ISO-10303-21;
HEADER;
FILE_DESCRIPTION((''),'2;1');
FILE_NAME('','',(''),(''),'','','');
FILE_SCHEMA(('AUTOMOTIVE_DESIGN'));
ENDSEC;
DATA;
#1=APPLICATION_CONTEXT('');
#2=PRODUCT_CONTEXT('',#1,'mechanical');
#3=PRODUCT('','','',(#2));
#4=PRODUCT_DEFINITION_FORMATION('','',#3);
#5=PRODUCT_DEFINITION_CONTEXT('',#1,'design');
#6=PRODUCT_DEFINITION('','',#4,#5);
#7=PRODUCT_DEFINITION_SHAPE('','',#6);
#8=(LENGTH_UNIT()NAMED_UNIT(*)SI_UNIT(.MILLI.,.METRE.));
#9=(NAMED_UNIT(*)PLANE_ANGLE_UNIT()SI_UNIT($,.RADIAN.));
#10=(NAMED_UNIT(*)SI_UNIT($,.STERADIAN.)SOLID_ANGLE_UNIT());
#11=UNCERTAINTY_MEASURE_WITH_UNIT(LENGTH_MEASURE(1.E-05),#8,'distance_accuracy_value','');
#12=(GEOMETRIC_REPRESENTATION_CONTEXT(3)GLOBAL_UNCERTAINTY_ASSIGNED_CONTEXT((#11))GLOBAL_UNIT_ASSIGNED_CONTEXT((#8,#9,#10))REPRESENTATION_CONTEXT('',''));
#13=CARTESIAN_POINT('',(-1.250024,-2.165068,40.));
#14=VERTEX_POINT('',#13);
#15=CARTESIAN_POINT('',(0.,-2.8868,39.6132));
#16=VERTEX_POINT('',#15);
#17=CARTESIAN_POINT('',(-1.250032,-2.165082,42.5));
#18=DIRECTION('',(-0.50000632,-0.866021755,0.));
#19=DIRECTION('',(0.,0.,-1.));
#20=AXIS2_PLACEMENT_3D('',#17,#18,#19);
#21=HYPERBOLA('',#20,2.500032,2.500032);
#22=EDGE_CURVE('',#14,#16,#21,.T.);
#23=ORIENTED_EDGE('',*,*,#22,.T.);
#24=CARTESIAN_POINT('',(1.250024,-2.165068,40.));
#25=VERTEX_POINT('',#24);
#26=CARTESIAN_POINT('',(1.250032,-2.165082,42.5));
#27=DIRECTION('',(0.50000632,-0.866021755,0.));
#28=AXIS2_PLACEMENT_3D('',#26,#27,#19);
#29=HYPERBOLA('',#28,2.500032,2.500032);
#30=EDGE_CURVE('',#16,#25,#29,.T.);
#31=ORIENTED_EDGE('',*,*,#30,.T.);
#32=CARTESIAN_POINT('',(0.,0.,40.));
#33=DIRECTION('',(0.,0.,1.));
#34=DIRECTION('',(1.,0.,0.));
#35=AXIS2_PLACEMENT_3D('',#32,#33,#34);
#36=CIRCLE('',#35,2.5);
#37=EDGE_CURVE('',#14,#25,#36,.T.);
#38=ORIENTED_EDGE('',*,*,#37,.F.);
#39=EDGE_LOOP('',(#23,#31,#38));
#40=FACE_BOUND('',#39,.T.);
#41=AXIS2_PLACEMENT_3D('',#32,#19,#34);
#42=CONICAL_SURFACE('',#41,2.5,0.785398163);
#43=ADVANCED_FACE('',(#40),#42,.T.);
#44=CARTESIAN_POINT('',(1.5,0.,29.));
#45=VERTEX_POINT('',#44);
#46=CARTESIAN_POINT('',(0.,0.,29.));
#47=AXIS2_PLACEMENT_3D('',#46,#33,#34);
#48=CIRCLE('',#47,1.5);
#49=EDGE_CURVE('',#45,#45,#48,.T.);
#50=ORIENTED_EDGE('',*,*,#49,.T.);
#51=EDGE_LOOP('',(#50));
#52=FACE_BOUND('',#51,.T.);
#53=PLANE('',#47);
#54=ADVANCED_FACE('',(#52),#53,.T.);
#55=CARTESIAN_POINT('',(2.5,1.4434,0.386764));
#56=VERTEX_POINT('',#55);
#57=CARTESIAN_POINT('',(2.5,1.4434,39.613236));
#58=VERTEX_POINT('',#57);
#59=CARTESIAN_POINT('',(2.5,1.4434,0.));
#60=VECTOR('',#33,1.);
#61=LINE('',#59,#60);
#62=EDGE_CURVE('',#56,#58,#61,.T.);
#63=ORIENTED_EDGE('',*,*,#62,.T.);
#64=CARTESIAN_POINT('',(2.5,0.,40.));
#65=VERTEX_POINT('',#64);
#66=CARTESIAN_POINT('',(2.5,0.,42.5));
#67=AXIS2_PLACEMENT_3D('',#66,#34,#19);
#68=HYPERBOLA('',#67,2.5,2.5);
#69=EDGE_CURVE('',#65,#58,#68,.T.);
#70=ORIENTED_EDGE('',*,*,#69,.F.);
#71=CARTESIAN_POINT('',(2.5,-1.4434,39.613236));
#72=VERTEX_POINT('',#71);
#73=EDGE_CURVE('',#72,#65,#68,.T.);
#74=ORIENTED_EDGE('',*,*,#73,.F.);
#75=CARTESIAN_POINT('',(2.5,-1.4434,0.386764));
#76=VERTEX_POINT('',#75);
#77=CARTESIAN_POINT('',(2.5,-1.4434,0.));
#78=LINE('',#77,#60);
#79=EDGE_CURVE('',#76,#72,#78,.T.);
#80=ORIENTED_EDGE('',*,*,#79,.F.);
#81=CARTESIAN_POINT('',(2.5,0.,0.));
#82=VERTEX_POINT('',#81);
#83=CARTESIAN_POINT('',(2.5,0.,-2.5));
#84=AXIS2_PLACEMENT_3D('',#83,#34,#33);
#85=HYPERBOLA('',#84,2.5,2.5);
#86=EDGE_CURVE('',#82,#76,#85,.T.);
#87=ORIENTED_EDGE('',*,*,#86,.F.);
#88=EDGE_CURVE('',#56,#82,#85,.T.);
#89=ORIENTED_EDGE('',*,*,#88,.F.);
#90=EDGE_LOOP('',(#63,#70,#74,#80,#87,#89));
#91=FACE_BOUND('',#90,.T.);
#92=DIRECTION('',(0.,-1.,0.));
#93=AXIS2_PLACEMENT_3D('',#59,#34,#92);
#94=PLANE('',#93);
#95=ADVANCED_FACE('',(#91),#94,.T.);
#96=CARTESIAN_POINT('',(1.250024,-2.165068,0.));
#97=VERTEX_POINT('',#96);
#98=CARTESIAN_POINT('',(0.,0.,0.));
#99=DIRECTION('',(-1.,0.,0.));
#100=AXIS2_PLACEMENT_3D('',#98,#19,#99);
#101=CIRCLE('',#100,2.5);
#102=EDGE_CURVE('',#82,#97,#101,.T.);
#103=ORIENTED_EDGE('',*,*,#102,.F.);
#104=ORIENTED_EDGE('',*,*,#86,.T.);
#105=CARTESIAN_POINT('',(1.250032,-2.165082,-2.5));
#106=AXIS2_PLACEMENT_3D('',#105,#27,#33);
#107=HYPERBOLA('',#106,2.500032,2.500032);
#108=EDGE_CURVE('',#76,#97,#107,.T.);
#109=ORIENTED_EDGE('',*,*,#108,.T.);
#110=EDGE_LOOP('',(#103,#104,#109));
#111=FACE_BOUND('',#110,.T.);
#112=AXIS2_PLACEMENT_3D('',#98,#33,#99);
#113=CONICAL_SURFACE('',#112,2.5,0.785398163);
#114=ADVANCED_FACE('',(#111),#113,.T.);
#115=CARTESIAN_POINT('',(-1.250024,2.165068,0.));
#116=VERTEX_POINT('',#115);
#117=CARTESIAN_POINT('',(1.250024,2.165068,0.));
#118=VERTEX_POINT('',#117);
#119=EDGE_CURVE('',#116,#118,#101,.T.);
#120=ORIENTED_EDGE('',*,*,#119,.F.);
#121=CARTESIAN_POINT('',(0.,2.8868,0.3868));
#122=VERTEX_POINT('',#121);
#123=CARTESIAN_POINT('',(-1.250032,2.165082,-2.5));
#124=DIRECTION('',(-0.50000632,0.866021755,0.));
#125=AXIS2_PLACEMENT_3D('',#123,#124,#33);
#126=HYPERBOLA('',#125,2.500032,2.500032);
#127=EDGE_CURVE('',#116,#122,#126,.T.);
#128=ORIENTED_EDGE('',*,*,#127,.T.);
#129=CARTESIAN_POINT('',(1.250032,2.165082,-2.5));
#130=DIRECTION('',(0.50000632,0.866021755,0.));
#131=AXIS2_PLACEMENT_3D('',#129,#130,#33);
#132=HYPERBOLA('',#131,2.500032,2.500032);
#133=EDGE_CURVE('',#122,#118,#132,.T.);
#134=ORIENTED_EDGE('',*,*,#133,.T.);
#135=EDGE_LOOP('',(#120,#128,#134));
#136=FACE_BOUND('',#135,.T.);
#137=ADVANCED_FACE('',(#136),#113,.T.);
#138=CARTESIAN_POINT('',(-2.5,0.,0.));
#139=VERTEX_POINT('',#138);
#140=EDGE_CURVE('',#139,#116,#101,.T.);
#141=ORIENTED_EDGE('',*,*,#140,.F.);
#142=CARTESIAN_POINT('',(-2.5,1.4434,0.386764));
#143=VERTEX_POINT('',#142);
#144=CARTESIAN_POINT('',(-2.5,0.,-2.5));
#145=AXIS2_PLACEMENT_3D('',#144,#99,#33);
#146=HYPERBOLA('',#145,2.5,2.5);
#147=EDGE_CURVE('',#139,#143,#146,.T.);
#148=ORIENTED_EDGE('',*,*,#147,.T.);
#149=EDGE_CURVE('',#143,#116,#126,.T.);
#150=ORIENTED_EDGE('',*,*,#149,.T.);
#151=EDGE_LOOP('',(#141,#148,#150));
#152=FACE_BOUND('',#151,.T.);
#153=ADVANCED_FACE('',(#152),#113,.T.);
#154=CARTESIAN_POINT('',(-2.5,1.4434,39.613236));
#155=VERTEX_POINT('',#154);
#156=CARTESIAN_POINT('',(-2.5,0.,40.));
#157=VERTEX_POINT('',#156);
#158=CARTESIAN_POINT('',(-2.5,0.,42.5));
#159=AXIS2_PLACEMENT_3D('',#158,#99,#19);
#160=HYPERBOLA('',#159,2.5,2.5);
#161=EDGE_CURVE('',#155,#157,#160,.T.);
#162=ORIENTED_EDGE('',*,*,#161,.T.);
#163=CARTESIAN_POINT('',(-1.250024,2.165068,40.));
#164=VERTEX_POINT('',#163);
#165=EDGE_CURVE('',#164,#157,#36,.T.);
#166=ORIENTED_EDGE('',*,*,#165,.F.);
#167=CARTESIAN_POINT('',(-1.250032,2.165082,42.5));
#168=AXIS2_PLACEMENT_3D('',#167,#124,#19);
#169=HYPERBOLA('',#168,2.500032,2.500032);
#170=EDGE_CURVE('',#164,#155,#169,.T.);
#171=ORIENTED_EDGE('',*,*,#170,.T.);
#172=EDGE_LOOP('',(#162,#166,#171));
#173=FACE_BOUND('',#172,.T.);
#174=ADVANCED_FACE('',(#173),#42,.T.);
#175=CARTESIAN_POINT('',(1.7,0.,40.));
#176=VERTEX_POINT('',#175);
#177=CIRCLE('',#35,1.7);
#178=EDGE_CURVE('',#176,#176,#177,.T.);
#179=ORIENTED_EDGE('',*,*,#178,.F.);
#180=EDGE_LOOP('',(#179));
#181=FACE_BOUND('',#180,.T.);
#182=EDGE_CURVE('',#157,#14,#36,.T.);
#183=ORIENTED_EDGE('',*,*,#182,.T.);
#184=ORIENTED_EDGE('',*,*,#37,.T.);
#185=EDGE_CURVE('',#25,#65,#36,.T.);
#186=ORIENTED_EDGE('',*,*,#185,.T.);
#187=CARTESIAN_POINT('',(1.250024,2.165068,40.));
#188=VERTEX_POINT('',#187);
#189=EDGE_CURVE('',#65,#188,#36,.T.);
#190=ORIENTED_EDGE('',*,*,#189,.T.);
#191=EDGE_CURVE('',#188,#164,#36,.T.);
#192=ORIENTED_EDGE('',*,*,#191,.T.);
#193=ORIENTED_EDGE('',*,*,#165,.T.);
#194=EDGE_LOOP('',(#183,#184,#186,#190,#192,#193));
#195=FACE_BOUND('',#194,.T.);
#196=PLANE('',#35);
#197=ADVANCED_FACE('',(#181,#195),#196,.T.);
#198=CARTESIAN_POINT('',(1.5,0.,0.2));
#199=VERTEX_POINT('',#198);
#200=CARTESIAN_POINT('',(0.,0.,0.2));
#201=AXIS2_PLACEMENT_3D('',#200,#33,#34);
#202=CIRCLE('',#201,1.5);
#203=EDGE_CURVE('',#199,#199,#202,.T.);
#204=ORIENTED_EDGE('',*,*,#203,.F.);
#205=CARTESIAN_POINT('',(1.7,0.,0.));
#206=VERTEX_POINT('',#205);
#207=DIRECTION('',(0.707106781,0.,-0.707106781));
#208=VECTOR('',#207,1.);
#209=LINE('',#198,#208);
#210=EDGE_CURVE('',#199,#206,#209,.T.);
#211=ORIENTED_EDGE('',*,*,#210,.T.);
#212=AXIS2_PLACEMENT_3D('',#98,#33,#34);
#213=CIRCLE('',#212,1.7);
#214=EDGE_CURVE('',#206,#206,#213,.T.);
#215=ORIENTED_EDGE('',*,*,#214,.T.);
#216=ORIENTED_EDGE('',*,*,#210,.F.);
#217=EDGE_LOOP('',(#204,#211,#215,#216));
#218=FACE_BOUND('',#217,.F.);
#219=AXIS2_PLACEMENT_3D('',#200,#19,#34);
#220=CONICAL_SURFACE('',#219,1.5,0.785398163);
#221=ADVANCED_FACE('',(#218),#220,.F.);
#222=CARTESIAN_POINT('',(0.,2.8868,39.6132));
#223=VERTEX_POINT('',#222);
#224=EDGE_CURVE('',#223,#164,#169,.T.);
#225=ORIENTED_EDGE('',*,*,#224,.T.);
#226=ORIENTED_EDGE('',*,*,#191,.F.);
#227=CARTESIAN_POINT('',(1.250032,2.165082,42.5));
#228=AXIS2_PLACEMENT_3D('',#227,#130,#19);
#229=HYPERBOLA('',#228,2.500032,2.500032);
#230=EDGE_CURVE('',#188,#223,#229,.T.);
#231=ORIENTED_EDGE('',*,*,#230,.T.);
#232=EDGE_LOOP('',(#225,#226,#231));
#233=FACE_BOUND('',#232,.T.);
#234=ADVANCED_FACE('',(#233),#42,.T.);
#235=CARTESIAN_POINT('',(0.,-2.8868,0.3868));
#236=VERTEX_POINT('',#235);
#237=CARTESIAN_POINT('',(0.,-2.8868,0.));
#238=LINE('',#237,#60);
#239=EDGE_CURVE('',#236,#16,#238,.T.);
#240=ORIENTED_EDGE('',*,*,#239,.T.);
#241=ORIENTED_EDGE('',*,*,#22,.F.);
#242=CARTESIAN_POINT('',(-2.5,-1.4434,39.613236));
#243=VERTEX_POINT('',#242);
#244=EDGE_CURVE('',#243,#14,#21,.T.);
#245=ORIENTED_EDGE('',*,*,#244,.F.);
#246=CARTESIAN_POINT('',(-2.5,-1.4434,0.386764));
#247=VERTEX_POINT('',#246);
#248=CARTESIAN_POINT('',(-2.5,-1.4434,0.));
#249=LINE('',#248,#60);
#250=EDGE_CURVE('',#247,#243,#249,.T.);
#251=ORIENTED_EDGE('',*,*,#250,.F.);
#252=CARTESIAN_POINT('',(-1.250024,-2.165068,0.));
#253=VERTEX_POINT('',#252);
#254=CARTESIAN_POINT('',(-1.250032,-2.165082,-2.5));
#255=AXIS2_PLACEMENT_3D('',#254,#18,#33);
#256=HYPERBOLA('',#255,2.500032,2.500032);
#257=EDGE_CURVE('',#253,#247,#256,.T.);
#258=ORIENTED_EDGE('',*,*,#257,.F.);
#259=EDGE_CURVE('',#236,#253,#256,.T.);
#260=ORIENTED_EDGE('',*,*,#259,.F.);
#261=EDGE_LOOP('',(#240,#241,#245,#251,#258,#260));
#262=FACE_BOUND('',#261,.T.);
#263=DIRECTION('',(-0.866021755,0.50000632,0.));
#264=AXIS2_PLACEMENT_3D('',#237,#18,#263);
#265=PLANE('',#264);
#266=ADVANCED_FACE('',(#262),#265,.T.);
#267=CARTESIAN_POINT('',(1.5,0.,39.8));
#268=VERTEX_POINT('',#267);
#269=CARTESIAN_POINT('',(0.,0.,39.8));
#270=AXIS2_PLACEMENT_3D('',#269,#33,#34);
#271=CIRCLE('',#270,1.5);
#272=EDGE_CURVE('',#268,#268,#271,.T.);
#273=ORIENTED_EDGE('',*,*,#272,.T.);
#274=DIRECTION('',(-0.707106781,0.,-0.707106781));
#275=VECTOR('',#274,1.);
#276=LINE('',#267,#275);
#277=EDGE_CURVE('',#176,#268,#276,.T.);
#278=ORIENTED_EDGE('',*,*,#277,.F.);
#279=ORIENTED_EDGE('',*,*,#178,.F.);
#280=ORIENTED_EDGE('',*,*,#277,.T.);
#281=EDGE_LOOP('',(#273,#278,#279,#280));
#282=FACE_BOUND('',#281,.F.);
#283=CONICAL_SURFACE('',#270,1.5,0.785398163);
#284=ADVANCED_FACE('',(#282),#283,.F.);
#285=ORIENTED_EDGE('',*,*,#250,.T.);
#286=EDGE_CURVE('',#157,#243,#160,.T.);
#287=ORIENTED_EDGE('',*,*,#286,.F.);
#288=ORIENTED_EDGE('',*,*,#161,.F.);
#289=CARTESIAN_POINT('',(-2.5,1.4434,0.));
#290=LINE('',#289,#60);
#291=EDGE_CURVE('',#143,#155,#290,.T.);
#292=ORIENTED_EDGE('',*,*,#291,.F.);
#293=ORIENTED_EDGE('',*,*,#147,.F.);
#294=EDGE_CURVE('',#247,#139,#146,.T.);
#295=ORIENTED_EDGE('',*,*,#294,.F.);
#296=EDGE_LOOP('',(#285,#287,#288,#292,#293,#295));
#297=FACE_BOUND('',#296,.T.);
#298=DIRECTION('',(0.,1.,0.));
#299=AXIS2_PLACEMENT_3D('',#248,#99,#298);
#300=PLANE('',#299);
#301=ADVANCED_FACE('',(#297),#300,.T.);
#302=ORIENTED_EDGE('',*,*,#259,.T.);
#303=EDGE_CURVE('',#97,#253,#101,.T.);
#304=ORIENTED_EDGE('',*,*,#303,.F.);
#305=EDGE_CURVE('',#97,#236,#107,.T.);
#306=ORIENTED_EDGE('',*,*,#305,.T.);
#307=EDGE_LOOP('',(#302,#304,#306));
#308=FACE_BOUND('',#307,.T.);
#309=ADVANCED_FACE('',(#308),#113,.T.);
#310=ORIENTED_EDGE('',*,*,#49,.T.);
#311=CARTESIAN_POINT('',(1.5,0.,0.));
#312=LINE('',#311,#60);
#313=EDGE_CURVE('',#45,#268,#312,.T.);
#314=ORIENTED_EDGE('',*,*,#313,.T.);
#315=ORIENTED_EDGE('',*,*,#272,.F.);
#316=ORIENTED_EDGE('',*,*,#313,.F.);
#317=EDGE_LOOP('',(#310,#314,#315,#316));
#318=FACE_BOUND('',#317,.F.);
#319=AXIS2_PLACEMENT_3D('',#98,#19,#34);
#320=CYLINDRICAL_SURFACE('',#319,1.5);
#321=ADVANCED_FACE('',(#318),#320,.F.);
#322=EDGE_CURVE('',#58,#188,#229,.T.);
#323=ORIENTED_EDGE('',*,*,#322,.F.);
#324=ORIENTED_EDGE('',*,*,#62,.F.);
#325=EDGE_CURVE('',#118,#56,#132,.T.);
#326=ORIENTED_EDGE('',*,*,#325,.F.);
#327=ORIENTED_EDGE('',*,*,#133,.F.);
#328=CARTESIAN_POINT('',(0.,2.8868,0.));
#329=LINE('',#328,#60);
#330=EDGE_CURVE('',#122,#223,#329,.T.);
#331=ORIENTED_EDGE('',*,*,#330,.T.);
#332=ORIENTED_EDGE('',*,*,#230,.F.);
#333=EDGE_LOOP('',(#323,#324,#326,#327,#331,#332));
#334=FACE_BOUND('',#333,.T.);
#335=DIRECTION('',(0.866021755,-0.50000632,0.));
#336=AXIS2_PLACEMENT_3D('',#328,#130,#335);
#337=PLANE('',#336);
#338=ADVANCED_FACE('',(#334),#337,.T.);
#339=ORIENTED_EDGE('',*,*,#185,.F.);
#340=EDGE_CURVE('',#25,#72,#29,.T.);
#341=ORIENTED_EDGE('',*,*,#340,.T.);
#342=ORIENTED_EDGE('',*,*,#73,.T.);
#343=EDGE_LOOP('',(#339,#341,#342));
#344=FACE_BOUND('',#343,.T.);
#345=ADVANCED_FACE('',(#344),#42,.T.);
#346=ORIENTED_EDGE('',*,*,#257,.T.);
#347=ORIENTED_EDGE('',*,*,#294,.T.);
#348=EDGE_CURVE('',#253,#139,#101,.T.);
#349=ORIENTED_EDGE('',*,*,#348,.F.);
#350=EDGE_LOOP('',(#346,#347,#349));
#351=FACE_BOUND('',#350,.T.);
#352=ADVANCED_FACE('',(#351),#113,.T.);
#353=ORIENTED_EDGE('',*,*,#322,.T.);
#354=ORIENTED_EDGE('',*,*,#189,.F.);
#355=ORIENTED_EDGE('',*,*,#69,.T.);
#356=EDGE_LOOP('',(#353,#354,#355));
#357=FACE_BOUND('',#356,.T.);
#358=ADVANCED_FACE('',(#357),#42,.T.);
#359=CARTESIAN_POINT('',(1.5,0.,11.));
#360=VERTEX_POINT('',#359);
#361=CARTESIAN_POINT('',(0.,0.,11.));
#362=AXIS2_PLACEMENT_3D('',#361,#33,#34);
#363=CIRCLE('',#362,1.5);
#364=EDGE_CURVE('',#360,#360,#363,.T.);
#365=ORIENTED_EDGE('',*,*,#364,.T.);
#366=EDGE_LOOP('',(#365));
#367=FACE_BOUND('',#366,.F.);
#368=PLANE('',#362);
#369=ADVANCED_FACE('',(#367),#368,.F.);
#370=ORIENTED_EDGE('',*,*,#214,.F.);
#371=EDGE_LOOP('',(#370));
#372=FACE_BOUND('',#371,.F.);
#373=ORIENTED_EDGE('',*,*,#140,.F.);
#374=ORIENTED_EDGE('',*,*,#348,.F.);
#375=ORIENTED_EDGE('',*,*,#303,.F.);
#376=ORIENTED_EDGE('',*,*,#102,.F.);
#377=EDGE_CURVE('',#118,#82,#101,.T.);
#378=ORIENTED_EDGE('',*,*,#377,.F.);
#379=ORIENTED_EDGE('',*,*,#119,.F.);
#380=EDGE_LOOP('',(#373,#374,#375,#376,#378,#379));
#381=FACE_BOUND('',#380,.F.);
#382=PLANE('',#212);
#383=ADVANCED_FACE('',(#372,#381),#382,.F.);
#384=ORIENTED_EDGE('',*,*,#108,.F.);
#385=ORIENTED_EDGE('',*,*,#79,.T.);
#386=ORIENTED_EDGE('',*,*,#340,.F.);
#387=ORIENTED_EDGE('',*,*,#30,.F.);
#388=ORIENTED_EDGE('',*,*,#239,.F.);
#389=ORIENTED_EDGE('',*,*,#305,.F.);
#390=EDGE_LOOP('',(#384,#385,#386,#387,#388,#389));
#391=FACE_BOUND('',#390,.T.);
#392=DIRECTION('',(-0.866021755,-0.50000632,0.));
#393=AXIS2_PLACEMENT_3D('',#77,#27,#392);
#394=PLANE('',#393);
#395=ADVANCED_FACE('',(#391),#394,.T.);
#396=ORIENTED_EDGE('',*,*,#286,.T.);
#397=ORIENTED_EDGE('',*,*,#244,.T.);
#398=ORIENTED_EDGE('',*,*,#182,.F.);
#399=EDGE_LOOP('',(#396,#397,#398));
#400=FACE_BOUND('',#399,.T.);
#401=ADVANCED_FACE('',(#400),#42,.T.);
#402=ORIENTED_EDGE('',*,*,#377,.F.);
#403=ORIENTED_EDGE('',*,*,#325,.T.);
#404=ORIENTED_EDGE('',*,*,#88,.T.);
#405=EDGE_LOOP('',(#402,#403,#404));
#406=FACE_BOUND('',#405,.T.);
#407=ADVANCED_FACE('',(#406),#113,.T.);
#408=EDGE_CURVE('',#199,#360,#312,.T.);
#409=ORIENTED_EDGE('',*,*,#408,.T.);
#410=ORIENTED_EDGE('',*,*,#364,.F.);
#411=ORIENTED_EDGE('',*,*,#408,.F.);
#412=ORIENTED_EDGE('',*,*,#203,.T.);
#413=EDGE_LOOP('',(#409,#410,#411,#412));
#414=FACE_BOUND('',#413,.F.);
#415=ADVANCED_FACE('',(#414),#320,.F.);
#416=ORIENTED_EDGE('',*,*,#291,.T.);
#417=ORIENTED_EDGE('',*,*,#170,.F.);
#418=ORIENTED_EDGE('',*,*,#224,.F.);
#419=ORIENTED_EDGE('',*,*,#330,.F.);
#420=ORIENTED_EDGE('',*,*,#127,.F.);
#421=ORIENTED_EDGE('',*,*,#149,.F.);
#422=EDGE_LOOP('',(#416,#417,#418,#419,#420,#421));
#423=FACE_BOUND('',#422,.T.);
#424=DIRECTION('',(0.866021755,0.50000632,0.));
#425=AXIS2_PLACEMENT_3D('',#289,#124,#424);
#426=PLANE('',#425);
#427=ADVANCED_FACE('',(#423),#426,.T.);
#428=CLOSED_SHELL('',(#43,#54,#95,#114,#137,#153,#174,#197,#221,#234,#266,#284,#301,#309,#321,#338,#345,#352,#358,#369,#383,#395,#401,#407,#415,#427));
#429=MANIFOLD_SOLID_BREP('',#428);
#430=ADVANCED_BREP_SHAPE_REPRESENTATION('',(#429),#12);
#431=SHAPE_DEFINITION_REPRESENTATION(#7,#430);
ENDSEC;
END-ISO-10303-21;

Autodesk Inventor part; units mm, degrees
ref_plane "YZ Plane" through (0, 0, 0) normal (1, 0, 0) x (0, 1, 0)
ref_plane "XZ Plane" through (0, 0, 0) normal (0, 1, 0) x (-1, 0, 0)
sketch "Náčrt1" plane through (0, 0, 0) normal (0, 0, 1) x (1, 0, 0)
  line L0 (2.5, -1.4434) -> (0, -2.8868)
  line L1 (0, -2.8868) -> (-2.5, -1.4434)
  line L2 (-2.5, -1.4434) -> (-2.5, 1.4434)
  line L3 (-2.5, 1.4434) -> (0, 2.8868)
  line L4 (0, 2.8868) -> (2.5, 1.4434)
  line L5 (2.5, 1.4434) -> (2.5, -1.4434)
  circle A0 centre (0, 0) radius 1.5
  point P0 (2.5, 0)
  dimension "d1" = 3
  dimension "d16" = 5
extrude "Vysunutí1" add sketch "Náčrt1" along normal blind 40
thread "Závit1" size "M3x0.5" class "6H" standard "ANSI Metric M Profile" full length
sketch "Náčrt2" plane through (0, 0, 40) normal (0, 0, 1) x (1, 0, 0)
  circle A0 centre (0, 0) radius 2.5
  dimension "d18" = 5
extrude "Vysunutí2" cut sketch "Náčrt2" against normal through all draft 45 keep common part
sketch "Náčrt3" plane through (0, 0, 0) normal (0, 0, -1) x (-1, 0, 0)
  circle A0 centre (0, 0) radius 2.5
  dimension "d17" = 5
extrude "Vysunutí3" cut sketch "Náčrt3" against normal through all draft 45 keep common part
chamfer "Zkosení1" distance 0.2 angle 45 1 edges at (-1.5, 0, 40)
chamfer "Zkosení2" distance 0.2 angle 45 1 edges at (-1.5, 0, 0)
ref_plane "Pracovní rovina1" through (0, 0, 20) normal (0, 0, 1) x (1, 0, 0)
sketch "Náčrt4" plane through (0, 0, 20) normal (0, 0, 1) x (1, 0, 0)
  point P0 (0, 0)
sketch "Náčrt5" plane through (0, 0, 20) normal (0, 0, 1) x (1, 0, 0)
  circle A0 centre (0, 0) radius 1.5
  dimension "d19" = 3
extrude "Vysunutí4" add sketch "Náčrt5" along normal mid plane 18
properties part number "PillarBolt-M3x40" material "Ocel, vysokopevnostní, nízkolegovaná"
